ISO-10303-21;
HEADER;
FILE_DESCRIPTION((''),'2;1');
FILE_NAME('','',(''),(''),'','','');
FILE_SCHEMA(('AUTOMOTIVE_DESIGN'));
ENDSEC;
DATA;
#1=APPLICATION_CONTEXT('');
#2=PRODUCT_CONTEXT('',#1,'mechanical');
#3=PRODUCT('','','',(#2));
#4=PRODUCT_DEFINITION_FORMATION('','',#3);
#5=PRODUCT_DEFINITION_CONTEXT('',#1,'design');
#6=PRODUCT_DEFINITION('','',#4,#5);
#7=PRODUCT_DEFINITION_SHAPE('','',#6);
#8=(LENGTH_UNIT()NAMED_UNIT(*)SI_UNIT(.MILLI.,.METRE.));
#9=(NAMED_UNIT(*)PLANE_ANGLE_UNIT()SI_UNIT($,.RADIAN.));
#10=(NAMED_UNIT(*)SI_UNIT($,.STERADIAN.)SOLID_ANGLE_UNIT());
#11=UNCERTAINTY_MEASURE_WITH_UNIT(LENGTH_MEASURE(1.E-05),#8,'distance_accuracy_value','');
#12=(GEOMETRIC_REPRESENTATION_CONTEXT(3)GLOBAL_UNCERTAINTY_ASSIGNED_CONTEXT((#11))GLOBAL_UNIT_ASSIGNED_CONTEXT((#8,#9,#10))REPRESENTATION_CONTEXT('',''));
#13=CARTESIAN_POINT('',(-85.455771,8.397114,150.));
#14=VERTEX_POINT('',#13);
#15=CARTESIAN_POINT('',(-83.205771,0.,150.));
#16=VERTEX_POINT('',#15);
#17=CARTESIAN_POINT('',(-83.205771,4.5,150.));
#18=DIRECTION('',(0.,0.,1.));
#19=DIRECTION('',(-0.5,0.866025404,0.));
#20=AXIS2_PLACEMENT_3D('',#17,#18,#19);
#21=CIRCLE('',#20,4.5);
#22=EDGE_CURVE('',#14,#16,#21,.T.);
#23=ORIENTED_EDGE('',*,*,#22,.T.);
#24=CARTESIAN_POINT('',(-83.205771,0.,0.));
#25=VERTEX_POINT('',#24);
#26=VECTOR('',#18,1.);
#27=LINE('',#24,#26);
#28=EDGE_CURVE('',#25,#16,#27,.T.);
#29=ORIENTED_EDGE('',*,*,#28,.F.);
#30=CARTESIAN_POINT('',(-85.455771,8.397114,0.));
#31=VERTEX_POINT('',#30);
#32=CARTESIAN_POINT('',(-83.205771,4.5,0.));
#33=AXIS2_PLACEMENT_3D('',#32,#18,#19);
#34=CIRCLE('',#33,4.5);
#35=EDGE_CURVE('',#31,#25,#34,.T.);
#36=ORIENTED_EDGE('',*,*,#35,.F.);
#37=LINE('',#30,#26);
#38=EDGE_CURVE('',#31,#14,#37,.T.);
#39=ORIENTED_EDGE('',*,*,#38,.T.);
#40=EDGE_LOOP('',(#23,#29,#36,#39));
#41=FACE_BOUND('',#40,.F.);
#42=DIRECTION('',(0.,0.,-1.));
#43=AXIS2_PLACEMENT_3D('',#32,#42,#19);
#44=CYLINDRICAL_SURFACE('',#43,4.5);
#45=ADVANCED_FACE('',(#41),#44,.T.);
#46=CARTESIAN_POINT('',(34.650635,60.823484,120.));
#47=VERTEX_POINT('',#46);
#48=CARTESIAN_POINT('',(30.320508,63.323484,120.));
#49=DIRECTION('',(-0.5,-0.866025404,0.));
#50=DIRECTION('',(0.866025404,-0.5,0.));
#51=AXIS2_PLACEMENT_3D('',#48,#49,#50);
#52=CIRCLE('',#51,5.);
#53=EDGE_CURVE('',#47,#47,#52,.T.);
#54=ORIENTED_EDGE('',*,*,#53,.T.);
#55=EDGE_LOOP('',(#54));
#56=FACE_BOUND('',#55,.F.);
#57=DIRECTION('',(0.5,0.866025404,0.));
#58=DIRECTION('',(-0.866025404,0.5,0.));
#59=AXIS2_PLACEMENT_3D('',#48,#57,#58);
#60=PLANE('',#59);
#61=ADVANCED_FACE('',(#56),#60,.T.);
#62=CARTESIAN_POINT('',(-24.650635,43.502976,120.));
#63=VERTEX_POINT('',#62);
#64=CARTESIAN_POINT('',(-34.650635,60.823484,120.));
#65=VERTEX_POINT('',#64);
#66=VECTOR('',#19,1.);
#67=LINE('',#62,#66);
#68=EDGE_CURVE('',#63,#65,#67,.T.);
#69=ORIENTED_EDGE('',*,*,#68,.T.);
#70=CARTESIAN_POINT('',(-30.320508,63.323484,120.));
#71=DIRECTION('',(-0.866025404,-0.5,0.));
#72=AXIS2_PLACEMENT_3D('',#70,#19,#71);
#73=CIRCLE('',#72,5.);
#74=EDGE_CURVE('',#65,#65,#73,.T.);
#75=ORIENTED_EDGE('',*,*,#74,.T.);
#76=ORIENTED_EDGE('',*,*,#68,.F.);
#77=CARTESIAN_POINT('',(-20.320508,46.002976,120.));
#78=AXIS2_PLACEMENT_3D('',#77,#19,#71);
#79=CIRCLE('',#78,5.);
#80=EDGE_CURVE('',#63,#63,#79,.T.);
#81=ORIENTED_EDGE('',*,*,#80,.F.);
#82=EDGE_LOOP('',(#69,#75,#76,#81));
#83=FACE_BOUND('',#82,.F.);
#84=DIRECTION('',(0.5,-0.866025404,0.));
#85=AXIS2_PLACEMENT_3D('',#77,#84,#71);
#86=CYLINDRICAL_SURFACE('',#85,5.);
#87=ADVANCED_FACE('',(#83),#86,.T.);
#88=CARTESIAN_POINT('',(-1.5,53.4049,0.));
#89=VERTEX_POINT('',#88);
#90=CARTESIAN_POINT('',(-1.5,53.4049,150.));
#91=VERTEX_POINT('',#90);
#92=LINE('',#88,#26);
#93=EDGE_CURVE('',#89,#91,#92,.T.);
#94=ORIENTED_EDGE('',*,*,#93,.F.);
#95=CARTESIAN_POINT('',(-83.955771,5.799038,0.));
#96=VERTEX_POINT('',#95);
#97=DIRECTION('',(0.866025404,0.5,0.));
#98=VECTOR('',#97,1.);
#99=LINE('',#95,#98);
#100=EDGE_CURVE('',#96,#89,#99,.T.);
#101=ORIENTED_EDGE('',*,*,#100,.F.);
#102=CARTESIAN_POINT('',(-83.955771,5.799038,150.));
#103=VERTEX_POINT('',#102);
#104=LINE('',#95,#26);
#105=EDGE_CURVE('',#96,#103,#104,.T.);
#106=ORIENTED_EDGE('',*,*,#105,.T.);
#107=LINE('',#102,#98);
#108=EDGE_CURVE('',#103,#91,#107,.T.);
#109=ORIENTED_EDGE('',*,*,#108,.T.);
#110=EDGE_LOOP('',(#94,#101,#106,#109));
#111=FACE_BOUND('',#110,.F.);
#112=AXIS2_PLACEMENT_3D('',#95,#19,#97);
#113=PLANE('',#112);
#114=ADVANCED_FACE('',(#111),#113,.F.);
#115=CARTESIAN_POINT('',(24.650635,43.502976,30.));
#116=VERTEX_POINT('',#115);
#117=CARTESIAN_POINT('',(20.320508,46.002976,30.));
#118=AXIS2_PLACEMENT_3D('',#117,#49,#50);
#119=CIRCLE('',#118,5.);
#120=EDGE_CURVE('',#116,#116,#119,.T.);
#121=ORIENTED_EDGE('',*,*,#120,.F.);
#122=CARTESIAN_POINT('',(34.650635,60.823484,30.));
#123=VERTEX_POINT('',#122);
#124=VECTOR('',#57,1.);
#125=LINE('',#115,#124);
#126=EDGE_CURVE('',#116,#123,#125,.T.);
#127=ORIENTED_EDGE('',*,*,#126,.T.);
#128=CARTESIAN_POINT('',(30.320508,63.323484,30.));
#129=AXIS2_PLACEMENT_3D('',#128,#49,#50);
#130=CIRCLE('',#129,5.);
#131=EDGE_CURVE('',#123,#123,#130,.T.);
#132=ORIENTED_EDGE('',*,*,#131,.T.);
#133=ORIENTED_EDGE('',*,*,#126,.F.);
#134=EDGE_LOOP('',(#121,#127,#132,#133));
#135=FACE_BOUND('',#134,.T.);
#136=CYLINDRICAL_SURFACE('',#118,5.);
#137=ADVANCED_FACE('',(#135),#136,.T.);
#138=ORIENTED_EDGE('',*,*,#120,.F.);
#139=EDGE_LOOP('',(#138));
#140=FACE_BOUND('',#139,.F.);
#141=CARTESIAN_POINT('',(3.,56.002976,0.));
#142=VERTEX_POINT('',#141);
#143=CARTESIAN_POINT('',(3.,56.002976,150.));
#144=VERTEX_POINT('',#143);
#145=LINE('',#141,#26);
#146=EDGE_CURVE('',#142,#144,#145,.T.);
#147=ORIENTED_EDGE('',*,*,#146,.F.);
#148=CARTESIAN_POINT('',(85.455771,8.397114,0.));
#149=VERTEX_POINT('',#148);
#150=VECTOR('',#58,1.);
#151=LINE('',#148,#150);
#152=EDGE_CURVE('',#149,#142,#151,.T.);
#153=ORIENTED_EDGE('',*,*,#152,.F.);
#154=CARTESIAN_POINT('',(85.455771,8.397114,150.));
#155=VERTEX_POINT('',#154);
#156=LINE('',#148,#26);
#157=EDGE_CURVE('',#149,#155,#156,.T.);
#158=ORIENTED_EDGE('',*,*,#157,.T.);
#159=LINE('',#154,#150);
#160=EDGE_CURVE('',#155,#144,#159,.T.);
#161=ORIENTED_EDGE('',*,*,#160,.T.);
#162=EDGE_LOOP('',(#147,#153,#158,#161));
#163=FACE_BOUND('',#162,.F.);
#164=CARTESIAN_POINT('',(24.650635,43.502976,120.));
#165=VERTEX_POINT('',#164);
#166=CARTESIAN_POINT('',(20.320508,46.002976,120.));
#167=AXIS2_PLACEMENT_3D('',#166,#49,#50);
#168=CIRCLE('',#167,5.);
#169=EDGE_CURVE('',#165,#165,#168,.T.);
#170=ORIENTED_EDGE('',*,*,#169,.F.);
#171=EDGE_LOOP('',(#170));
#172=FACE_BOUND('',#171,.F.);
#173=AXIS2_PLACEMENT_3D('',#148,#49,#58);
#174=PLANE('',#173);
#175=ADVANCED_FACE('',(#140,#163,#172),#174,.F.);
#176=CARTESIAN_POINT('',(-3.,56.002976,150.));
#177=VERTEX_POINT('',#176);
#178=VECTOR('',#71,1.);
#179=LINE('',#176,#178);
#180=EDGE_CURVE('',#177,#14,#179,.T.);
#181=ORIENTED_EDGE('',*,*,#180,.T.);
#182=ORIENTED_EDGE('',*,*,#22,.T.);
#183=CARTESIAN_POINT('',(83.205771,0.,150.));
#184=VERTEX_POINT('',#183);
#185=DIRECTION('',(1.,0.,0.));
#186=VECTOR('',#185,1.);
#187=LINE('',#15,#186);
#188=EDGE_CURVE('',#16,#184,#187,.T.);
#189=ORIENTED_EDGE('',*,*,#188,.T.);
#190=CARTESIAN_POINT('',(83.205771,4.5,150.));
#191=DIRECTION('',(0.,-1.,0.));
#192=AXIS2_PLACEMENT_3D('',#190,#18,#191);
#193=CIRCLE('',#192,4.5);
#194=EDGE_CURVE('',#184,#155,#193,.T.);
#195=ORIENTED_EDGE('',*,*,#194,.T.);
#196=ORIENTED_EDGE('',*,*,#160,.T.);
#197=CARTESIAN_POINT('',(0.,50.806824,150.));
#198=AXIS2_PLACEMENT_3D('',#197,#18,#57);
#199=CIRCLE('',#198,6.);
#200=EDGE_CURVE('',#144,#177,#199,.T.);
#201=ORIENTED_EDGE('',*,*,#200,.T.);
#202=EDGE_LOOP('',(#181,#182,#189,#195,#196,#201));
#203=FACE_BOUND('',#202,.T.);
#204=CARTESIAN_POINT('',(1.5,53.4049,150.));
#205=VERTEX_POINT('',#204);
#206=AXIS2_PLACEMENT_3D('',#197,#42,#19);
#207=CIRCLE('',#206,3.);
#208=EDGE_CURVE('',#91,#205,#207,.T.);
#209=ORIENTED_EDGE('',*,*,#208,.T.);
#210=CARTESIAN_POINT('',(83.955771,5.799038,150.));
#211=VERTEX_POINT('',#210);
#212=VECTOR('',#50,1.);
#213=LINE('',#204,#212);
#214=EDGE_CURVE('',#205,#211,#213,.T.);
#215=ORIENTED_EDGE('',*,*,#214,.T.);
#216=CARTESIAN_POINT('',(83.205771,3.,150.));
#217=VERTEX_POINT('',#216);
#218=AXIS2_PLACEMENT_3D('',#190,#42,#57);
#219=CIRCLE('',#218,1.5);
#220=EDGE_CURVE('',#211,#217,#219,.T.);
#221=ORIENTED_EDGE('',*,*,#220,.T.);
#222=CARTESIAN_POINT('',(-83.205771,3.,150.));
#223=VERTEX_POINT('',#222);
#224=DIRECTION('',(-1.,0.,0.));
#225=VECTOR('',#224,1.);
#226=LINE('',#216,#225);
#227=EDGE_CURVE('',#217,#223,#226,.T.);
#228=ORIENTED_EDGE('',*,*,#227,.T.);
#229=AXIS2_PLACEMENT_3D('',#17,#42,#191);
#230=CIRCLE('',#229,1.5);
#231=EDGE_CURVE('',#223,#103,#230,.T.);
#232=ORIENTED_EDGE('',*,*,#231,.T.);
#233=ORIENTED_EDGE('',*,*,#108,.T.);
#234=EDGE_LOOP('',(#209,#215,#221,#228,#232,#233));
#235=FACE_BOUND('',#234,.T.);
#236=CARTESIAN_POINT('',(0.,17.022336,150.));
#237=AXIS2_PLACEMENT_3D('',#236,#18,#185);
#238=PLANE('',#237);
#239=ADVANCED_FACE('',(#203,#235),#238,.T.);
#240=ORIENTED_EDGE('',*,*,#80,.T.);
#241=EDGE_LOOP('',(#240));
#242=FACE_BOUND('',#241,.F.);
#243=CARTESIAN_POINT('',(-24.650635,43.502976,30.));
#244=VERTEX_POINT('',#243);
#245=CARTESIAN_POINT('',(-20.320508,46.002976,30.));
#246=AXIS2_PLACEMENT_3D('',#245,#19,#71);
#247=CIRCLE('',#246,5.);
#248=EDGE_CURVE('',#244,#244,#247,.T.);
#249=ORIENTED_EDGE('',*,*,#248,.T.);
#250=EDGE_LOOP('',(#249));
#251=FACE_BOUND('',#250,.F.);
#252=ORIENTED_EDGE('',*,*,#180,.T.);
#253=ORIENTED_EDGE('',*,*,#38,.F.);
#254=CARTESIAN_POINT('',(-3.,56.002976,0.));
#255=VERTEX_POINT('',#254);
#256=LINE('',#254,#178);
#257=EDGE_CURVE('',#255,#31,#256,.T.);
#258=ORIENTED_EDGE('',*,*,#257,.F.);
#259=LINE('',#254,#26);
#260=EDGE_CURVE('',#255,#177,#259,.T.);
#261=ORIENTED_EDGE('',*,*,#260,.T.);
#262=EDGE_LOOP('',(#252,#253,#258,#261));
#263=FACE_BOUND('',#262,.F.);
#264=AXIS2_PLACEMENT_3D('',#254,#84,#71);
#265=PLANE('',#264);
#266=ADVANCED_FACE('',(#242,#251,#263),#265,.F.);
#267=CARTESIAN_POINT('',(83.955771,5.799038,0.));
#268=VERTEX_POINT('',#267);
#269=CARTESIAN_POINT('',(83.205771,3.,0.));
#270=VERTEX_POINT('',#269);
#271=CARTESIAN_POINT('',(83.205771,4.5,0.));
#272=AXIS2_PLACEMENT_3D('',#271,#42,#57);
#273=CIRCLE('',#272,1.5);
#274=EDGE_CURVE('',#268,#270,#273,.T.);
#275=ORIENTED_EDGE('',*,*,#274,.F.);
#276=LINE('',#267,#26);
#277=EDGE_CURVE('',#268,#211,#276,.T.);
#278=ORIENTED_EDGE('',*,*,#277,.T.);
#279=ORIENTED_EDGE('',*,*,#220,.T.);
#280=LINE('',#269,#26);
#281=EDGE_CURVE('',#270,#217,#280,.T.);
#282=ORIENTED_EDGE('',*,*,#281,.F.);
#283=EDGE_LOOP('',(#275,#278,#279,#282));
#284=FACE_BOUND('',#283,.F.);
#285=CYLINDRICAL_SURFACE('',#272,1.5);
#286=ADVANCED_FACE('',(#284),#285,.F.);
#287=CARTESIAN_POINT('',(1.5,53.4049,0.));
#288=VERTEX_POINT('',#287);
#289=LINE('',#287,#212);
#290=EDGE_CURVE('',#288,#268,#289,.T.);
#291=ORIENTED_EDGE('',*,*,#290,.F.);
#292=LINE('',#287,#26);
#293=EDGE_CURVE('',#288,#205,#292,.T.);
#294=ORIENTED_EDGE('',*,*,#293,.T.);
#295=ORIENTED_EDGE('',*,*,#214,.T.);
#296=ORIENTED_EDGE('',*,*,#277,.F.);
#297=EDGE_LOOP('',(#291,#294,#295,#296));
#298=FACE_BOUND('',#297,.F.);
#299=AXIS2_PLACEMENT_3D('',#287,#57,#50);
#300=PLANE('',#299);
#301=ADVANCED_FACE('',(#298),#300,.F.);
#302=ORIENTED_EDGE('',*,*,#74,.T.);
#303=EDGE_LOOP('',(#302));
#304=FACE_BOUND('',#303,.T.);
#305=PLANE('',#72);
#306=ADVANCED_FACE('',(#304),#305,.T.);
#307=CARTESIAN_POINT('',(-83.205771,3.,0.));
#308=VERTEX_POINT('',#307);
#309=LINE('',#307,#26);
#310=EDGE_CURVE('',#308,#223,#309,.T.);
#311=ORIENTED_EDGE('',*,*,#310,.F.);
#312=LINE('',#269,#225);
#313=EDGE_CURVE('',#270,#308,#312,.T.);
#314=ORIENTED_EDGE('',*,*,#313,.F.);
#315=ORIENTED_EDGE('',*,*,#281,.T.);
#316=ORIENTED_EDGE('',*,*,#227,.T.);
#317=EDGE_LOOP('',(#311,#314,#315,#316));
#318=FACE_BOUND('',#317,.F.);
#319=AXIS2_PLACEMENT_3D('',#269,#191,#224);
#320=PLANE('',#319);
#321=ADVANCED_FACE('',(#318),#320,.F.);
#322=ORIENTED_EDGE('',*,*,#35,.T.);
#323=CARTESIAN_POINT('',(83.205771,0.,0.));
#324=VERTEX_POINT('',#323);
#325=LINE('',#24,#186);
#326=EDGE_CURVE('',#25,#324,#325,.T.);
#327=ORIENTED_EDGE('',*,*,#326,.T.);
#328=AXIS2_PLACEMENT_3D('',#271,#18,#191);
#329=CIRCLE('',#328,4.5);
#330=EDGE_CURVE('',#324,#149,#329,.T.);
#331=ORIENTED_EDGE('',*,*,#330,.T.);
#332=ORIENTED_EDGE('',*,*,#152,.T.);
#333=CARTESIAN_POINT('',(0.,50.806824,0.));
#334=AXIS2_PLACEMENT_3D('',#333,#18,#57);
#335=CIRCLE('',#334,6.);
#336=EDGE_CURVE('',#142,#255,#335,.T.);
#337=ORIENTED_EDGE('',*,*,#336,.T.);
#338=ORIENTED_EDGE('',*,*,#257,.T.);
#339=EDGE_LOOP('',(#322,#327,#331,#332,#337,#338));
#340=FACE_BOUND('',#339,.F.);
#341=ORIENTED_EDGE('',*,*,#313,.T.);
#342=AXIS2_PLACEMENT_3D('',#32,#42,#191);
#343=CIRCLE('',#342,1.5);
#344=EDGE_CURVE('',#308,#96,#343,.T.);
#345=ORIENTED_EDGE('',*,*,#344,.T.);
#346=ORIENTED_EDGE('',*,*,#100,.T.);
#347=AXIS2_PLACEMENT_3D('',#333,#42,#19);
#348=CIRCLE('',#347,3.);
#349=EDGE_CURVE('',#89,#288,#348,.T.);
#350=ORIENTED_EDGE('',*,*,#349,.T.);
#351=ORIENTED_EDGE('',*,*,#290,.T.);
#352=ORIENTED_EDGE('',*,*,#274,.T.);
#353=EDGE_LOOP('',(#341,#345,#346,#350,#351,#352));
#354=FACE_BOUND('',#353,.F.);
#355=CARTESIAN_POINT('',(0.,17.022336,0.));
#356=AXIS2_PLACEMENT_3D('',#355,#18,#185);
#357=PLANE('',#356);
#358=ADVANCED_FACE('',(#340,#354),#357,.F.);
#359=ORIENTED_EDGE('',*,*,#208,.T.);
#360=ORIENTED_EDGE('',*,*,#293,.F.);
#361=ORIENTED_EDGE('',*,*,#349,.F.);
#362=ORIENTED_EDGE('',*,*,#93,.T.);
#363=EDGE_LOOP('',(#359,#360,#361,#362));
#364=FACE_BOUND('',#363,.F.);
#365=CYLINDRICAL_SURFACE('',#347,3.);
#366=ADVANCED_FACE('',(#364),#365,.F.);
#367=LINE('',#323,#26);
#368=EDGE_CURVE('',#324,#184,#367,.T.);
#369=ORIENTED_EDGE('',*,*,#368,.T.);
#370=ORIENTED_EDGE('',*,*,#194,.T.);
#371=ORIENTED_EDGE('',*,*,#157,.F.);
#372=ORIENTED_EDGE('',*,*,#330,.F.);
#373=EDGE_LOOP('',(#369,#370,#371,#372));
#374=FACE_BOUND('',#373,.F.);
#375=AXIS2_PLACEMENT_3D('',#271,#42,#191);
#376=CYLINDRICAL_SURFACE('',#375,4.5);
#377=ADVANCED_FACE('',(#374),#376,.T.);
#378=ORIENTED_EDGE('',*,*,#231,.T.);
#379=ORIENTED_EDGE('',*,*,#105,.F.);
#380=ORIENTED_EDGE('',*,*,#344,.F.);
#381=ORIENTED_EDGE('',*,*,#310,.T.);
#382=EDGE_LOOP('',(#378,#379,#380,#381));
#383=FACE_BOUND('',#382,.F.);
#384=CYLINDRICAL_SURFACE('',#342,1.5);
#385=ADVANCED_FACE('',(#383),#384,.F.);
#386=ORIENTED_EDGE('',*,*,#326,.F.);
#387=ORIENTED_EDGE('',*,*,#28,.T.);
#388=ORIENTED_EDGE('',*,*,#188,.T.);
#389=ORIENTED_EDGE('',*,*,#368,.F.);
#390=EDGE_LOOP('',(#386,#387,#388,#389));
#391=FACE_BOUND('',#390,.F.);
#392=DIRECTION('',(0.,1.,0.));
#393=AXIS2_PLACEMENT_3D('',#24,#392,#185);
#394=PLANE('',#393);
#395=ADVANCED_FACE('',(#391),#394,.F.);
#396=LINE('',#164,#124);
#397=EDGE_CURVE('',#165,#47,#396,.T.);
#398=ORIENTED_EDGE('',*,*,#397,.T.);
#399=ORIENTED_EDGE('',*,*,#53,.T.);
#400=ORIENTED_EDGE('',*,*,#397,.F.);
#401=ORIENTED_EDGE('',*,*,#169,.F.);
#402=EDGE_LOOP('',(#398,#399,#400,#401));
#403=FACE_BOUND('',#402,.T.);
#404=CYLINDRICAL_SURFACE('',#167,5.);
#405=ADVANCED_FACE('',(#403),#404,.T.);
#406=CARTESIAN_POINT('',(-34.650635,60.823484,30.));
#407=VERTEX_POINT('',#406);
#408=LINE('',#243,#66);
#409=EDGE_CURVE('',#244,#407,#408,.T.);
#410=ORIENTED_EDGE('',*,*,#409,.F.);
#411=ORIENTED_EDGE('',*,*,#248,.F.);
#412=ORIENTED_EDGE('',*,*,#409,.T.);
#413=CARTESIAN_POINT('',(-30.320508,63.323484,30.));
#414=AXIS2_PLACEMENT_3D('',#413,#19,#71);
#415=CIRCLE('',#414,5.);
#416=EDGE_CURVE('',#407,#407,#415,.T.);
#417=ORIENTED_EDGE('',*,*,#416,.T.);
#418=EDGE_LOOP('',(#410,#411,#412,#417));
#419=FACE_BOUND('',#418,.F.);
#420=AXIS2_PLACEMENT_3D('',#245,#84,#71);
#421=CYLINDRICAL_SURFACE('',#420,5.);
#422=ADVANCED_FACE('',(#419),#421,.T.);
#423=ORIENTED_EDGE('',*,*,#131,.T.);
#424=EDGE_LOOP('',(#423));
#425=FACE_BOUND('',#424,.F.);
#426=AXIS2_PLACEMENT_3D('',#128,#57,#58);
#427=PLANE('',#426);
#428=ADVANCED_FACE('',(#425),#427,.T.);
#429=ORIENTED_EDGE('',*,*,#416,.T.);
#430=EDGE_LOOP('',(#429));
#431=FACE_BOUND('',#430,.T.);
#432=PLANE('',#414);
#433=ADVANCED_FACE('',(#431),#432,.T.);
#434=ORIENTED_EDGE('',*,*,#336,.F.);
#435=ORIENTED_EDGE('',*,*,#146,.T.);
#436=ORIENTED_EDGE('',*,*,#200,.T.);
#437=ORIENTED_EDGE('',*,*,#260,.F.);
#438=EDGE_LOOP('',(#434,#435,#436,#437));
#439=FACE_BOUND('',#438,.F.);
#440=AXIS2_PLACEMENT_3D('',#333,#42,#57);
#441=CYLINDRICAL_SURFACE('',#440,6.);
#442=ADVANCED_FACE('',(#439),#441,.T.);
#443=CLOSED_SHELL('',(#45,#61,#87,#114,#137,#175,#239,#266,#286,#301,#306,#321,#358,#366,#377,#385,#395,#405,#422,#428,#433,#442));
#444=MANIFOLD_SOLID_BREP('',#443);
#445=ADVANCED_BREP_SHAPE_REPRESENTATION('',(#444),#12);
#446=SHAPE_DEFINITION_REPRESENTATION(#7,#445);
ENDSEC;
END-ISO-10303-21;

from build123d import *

# Parameters (mm, degrees)
F1_DEPTH = 150
F2_R     = 5
F3_DEPTH = 20


# Not quite as in the source:
# - a pattern or mirror of a feature is missing from the dataset's text; its kind, count and spacing are read off the source's solid


with BuildPart() as f1:
    # F0 (on Top) → F1 (new body)
    with BuildSketch(Plane.XY):
        with BuildLine():
            Line((-83.2057713659, 0), (0, 0))
            Line((0, 0), (83.2057713659, 0))
            ThreePointArc((83.2057713659, 0), (87.5524375842, 3.335314297), (85.4557713659, 8.397114317))
            Line((85.4557713659, 8.397114317), (3, 56.0029761114))
            ThreePointArc((3, 56.0029761114), (0, 56.8068236887), (-3, 56.0029761114))
            Line((-3, 56.0029761114), (-85.4557713659, 8.397114317))
            ThreePointArc((-85.4557713659, 8.397114317), (-87.5524375842, 3.335314297), (-83.2057713659, 0))
        make_face()
        with BuildLine():
            Line((83.2057713659, 3), (0, 3))
            Line((0, 3), (-83.2057713659, 3))
            ThreePointArc((-83.2057713659, 3), (-84.6546601054, 4.1117714323), (-83.9557713659, 5.7990381057))
            Line((-83.9557713659, 5.7990381057), (-1.5, 53.4048999))
            ThreePointArc((-1.5, 53.4048999), (0, 53.8068236887), (1.5, 53.4048999))
            Line((1.5, 53.4048999), (83.9557713659, 5.7990381057))
            ThreePointArc((83.9557713659, 5.7990381057), (84.6546601054, 4.1117714323), (83.2057713659, 3))
        make_face(mode=Mode.SUBTRACT)
    extrude(amount=F1_DEPTH)

    # F2 (on face) → F3 (join)
    with BuildSketch(Plane(origin=(-25, 43.3012701892, 0), x_dir=(-0.8660254038, -0.5, 0), z_dir=(-0.5, 0.8660254038, 0))):
        with Locations((-5.4034118443, 30)):
            Circle(F2_R)
        with Locations((-5.4034118443, 120)):
            Circle(F2_R)
    f3 = extrude(amount=F3_DEPTH)

    # F3_copies: F3 across plane
    add(f3.mirror(Plane(origin=(0, 0, 0), x_dir=(0, 0, 1), z_dir=(1, 0, 0))))


solid = f1.part
